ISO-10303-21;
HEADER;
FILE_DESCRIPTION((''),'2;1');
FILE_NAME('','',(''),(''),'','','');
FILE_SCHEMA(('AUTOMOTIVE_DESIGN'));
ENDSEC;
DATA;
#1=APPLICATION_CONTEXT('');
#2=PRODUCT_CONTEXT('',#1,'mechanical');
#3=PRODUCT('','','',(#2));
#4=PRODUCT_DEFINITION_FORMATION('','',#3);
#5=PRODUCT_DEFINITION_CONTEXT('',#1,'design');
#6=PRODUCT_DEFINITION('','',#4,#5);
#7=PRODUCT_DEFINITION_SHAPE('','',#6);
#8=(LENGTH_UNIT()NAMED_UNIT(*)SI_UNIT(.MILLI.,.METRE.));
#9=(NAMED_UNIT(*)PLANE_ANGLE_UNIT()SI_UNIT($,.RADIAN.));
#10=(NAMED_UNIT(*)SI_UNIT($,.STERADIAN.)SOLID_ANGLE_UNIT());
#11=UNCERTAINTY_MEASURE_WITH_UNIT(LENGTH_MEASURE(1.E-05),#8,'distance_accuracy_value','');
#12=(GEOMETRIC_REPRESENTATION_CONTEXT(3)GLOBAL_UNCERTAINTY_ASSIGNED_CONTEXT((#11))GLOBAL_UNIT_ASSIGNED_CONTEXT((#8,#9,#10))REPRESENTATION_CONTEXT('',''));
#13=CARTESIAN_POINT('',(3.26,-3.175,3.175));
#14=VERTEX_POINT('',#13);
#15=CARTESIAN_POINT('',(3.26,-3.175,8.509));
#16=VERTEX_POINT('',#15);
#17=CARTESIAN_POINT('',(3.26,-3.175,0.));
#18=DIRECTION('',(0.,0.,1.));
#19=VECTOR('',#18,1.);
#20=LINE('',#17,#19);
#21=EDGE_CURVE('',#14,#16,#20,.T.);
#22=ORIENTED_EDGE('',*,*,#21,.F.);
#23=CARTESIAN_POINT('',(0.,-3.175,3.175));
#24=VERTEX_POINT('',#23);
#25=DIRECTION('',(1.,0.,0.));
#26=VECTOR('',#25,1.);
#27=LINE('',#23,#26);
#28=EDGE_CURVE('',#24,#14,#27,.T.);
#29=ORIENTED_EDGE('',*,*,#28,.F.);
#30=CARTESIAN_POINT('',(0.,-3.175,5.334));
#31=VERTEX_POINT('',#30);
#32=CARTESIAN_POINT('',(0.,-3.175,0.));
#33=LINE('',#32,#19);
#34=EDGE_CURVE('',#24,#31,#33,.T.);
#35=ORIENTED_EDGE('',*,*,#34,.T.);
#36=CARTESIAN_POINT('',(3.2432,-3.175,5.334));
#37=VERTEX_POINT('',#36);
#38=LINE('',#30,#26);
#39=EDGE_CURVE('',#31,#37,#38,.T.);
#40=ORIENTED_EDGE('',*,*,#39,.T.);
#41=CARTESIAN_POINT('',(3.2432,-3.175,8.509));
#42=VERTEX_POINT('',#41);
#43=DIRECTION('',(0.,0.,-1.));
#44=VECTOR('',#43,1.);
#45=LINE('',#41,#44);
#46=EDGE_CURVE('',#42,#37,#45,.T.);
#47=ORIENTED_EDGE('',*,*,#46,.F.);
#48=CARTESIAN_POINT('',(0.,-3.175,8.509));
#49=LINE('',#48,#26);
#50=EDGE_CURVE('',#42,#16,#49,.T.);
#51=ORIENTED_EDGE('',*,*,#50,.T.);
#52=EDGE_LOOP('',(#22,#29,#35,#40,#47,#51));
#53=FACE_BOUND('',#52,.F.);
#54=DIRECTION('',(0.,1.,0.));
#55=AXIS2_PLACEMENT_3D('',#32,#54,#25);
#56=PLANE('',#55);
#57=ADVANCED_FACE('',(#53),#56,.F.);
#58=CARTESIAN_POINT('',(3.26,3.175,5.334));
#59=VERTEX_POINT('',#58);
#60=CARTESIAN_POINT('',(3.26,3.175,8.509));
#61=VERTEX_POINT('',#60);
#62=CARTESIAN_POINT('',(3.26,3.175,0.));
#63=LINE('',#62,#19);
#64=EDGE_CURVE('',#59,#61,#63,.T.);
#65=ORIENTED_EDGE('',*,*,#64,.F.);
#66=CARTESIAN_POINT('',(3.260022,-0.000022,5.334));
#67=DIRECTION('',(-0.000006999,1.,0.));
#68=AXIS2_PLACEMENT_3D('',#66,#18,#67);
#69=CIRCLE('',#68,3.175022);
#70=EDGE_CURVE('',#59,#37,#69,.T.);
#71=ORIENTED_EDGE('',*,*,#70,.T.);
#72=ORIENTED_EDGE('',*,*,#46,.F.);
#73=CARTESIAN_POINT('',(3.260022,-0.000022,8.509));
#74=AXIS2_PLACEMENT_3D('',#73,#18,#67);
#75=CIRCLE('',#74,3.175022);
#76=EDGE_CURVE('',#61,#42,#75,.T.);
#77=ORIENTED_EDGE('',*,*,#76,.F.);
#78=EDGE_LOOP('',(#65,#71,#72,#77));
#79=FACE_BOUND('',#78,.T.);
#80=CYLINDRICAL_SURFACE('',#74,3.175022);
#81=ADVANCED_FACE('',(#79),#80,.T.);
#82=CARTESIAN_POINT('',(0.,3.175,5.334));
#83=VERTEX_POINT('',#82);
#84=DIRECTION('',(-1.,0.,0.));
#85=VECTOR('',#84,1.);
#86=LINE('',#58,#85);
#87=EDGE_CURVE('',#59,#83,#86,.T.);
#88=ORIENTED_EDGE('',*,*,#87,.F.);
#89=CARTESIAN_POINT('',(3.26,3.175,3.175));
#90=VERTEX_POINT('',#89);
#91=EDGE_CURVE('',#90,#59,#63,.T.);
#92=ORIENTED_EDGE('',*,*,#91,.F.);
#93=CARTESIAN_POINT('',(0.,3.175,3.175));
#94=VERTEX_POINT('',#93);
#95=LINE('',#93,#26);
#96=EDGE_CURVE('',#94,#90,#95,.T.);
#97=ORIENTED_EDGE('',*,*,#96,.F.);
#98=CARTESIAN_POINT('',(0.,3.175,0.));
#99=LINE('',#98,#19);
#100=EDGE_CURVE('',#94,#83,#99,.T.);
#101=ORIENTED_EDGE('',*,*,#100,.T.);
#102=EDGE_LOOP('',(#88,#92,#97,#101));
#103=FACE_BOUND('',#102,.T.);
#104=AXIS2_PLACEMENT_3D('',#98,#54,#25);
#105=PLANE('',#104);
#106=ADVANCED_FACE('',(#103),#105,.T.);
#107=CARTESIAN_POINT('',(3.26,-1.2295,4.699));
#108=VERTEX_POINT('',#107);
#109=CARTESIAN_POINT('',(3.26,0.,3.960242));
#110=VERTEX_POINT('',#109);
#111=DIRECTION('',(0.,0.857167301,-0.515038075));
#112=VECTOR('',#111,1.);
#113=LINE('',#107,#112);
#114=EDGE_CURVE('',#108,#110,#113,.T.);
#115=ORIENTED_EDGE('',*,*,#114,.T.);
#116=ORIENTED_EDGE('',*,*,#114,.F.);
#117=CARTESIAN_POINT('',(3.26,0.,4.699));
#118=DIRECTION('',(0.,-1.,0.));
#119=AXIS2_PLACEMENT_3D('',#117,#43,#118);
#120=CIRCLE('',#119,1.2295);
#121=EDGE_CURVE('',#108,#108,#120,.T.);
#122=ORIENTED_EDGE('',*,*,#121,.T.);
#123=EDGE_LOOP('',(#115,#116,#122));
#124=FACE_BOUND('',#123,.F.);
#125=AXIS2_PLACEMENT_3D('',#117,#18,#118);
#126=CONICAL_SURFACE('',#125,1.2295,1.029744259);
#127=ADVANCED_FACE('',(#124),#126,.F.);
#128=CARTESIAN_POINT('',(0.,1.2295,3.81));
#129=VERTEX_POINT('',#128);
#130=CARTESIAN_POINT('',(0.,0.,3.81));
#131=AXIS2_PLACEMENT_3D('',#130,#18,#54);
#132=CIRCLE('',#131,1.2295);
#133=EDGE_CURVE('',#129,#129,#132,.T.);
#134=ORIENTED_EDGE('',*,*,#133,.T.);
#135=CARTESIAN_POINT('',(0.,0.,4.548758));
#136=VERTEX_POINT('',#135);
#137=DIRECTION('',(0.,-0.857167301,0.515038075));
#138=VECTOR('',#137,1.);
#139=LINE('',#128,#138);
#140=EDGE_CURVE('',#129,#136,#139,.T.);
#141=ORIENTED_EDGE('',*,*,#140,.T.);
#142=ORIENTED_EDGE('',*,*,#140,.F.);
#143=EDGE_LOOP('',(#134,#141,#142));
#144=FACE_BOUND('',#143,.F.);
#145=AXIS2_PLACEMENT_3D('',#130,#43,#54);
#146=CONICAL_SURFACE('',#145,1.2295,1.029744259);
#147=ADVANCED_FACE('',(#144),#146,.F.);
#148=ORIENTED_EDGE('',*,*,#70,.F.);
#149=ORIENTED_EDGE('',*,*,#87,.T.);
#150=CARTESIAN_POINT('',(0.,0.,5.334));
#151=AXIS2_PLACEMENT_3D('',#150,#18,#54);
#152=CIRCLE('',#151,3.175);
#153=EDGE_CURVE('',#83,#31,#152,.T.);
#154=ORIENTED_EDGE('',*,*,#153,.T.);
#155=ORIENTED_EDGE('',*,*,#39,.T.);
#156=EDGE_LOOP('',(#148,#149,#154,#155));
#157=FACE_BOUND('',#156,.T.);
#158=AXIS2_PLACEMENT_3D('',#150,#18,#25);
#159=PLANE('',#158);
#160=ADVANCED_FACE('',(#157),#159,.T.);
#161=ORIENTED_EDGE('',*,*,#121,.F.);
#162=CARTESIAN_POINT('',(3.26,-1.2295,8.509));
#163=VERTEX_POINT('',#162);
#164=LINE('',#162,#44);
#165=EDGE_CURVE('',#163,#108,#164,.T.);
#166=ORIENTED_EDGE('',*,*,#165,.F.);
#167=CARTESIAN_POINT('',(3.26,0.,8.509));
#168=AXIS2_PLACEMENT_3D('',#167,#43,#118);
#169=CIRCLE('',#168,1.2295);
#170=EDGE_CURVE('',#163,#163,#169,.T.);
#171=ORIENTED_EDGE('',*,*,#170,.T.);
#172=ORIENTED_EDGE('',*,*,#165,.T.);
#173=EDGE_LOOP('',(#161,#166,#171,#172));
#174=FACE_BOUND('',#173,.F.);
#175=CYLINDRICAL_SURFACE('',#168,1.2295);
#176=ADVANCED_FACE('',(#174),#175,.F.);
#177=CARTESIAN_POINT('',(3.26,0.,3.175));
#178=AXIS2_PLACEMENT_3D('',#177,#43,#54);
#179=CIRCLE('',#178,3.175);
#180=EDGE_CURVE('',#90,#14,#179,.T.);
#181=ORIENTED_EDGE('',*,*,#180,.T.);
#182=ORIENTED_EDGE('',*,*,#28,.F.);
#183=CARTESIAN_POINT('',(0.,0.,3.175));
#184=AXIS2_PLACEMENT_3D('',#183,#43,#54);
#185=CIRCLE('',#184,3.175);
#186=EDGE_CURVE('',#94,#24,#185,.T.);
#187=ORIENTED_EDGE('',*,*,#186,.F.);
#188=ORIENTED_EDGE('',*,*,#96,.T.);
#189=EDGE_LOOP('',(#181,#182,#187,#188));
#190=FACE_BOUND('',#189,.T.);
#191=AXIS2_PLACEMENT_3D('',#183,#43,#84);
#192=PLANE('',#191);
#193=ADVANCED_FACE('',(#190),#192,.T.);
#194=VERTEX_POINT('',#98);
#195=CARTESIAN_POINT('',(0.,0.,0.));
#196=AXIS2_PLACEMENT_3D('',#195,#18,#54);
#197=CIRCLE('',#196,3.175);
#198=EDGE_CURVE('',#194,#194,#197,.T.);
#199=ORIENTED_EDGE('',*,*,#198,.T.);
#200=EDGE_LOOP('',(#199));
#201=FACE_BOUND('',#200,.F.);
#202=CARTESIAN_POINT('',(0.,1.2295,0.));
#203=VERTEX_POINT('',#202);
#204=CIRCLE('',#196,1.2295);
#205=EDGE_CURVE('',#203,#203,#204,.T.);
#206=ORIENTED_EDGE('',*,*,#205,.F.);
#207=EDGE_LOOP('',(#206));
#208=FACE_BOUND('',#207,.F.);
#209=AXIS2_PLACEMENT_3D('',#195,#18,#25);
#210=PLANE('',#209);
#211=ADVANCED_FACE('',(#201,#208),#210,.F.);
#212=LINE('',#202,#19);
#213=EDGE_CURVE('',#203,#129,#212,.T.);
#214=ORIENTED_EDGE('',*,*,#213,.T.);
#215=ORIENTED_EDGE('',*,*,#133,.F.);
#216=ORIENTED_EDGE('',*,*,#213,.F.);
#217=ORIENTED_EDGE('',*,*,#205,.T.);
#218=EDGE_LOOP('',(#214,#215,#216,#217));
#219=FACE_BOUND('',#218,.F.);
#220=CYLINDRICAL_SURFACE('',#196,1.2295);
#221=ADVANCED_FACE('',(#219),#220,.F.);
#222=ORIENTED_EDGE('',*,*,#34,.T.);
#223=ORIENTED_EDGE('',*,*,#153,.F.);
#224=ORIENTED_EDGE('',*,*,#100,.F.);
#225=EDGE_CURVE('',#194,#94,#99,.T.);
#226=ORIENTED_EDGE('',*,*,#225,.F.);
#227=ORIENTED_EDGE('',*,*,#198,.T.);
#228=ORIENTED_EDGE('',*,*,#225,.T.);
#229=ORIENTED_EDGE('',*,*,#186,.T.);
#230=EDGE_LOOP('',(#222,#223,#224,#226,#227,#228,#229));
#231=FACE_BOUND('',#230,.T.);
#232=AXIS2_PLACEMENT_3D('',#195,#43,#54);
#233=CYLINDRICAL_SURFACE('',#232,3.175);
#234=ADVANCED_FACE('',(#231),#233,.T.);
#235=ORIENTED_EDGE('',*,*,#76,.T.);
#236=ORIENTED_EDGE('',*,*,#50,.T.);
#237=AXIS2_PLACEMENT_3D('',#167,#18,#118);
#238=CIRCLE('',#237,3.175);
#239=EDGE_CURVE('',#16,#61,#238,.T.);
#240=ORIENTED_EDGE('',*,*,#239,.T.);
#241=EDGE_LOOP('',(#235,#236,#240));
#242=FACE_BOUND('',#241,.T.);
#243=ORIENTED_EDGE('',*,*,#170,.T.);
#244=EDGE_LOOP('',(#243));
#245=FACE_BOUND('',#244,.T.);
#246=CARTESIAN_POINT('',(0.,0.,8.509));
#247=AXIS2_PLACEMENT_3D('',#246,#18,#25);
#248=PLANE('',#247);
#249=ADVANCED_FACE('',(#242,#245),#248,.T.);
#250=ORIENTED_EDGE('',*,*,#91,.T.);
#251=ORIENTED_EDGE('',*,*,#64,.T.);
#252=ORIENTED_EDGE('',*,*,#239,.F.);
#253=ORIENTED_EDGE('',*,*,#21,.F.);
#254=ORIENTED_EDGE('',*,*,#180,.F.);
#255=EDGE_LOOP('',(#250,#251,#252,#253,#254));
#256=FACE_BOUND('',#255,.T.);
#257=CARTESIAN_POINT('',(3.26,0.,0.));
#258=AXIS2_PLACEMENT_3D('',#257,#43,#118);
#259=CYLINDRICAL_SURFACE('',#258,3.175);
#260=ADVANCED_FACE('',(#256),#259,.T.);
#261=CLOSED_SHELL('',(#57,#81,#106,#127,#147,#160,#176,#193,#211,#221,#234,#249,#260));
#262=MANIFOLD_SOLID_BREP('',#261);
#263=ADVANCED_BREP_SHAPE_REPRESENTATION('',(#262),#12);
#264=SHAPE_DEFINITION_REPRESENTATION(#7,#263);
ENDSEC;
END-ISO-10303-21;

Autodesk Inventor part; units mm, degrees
ref_plane "YZ Plane" through (0, 0, 0) normal (1, 0, 0) x (0, 1, 0)
ref_plane "XZ Plane" through (0, 0, 0) normal (0, 1, 0) x (-1, 0, 0)
ref_plane "XY Plane" through (0, 0, 0) normal (0, 0, 1) x (1, 0, 0)
sketch "Sketch2" plane through (0, 0, 0) normal (0, 0, 1) x (1, 0, 0)
  arc A0 (3.26, -3.175) -> (3.26, 3.175) centre (3.26, 0) ccw
  arc A1 (0, 3.175) -> (0, -3.175) centre (0, 0) ccw
  line L0 (0, 3.175) -> (3.26, 3.175)
  line L1 (0, -3.175) -> (3.26, -3.175)
  dimension "d14" = 6.35
  dimension "d15" = 6.35
  dimension "d16" = 0
  dimension "d17" = 0
  dimension "d18" = 3.26
  dimension "d19" = 0
extrude "Extrusion2" add sketch "Sketch2" along normal blind 8.509
sketch "Sketch3" plane through (0, 0, 8.509) normal (0, 0, 1) x (1, 0, 0)
  point P0 (0, 0)
  point P1 (3.26, 0)
  dimension "d22" = 3.26
  dimension "d23" = 0
hole "Hole1" at (3.26, 0, 8.509) direction (0, 0, -1) diameter 2.459 depth 3.81 tip angle 118 thread size "M3x0.5" class "6H" standard "ISO Metric profile"
sketch "Sketch4" plane through (0, 0, 0) normal (0, 0, -1) x (-1, 0, 0)
  point P0 (0, 0)
hole "Hole2" at (0, 0, 0) direction (0, 0, 1) diameter 2.459 depth 3.81 tip angle 118 thread size "M3x0.5" class "6H" standard "ISO Metric profile"
sketch "Sketch5" plane through (0, 0, 0) normal (0, 0, -1) x (-1, 0, 0)
  arc A0 (-3.26, 3.175) -> (-3.26, -3.175) centre (-3.26, 0) ccw
  arc A1 (0, 3.175) -> (0, -3.175) centre (0, 0) ccw
  line L0 (0, 3.175) -> (-3.26, 3.175)
  arc A2 (0, -3.175) -> (0, 3.175) centre (0, 0) ccw projected
  line L1 (0, -3.175) -> (-3.26, -3.175)
  dimension "d42" = 3.26
extrude "Extrusion3" cut sketch "Sketch5" against normal blind 3.175 from surface at 0 contours L0 A1 L1 A0
sketch "Sketch6" plane through (0, 0, 8.509) normal (0, 0, 1) x (1, 0, 0)
  arc A0 (3.26, 3.175) -> (3.2432, -3.175) centre (3.26, 0) ccw
  line L0 (3.26, 3.175) -> (0, 3.175)
  line L1 (0, -3.175) -> (3.26, -3.175) projected
  line L2 (3.2432, -3.175) -> (0, -3.175)
  arc A1 (0, 3.175) -> (0, -3.175) centre (0, 0) ccw
  point P0 (3.268, -3.175)
  dimension "d43" = 3.26
extrude "Extrusion4" cut sketch "Sketch6" against normal blind 3.175
properties part number "PC104_EM-113 standoff_3.268" material "Aluminum 6061"
